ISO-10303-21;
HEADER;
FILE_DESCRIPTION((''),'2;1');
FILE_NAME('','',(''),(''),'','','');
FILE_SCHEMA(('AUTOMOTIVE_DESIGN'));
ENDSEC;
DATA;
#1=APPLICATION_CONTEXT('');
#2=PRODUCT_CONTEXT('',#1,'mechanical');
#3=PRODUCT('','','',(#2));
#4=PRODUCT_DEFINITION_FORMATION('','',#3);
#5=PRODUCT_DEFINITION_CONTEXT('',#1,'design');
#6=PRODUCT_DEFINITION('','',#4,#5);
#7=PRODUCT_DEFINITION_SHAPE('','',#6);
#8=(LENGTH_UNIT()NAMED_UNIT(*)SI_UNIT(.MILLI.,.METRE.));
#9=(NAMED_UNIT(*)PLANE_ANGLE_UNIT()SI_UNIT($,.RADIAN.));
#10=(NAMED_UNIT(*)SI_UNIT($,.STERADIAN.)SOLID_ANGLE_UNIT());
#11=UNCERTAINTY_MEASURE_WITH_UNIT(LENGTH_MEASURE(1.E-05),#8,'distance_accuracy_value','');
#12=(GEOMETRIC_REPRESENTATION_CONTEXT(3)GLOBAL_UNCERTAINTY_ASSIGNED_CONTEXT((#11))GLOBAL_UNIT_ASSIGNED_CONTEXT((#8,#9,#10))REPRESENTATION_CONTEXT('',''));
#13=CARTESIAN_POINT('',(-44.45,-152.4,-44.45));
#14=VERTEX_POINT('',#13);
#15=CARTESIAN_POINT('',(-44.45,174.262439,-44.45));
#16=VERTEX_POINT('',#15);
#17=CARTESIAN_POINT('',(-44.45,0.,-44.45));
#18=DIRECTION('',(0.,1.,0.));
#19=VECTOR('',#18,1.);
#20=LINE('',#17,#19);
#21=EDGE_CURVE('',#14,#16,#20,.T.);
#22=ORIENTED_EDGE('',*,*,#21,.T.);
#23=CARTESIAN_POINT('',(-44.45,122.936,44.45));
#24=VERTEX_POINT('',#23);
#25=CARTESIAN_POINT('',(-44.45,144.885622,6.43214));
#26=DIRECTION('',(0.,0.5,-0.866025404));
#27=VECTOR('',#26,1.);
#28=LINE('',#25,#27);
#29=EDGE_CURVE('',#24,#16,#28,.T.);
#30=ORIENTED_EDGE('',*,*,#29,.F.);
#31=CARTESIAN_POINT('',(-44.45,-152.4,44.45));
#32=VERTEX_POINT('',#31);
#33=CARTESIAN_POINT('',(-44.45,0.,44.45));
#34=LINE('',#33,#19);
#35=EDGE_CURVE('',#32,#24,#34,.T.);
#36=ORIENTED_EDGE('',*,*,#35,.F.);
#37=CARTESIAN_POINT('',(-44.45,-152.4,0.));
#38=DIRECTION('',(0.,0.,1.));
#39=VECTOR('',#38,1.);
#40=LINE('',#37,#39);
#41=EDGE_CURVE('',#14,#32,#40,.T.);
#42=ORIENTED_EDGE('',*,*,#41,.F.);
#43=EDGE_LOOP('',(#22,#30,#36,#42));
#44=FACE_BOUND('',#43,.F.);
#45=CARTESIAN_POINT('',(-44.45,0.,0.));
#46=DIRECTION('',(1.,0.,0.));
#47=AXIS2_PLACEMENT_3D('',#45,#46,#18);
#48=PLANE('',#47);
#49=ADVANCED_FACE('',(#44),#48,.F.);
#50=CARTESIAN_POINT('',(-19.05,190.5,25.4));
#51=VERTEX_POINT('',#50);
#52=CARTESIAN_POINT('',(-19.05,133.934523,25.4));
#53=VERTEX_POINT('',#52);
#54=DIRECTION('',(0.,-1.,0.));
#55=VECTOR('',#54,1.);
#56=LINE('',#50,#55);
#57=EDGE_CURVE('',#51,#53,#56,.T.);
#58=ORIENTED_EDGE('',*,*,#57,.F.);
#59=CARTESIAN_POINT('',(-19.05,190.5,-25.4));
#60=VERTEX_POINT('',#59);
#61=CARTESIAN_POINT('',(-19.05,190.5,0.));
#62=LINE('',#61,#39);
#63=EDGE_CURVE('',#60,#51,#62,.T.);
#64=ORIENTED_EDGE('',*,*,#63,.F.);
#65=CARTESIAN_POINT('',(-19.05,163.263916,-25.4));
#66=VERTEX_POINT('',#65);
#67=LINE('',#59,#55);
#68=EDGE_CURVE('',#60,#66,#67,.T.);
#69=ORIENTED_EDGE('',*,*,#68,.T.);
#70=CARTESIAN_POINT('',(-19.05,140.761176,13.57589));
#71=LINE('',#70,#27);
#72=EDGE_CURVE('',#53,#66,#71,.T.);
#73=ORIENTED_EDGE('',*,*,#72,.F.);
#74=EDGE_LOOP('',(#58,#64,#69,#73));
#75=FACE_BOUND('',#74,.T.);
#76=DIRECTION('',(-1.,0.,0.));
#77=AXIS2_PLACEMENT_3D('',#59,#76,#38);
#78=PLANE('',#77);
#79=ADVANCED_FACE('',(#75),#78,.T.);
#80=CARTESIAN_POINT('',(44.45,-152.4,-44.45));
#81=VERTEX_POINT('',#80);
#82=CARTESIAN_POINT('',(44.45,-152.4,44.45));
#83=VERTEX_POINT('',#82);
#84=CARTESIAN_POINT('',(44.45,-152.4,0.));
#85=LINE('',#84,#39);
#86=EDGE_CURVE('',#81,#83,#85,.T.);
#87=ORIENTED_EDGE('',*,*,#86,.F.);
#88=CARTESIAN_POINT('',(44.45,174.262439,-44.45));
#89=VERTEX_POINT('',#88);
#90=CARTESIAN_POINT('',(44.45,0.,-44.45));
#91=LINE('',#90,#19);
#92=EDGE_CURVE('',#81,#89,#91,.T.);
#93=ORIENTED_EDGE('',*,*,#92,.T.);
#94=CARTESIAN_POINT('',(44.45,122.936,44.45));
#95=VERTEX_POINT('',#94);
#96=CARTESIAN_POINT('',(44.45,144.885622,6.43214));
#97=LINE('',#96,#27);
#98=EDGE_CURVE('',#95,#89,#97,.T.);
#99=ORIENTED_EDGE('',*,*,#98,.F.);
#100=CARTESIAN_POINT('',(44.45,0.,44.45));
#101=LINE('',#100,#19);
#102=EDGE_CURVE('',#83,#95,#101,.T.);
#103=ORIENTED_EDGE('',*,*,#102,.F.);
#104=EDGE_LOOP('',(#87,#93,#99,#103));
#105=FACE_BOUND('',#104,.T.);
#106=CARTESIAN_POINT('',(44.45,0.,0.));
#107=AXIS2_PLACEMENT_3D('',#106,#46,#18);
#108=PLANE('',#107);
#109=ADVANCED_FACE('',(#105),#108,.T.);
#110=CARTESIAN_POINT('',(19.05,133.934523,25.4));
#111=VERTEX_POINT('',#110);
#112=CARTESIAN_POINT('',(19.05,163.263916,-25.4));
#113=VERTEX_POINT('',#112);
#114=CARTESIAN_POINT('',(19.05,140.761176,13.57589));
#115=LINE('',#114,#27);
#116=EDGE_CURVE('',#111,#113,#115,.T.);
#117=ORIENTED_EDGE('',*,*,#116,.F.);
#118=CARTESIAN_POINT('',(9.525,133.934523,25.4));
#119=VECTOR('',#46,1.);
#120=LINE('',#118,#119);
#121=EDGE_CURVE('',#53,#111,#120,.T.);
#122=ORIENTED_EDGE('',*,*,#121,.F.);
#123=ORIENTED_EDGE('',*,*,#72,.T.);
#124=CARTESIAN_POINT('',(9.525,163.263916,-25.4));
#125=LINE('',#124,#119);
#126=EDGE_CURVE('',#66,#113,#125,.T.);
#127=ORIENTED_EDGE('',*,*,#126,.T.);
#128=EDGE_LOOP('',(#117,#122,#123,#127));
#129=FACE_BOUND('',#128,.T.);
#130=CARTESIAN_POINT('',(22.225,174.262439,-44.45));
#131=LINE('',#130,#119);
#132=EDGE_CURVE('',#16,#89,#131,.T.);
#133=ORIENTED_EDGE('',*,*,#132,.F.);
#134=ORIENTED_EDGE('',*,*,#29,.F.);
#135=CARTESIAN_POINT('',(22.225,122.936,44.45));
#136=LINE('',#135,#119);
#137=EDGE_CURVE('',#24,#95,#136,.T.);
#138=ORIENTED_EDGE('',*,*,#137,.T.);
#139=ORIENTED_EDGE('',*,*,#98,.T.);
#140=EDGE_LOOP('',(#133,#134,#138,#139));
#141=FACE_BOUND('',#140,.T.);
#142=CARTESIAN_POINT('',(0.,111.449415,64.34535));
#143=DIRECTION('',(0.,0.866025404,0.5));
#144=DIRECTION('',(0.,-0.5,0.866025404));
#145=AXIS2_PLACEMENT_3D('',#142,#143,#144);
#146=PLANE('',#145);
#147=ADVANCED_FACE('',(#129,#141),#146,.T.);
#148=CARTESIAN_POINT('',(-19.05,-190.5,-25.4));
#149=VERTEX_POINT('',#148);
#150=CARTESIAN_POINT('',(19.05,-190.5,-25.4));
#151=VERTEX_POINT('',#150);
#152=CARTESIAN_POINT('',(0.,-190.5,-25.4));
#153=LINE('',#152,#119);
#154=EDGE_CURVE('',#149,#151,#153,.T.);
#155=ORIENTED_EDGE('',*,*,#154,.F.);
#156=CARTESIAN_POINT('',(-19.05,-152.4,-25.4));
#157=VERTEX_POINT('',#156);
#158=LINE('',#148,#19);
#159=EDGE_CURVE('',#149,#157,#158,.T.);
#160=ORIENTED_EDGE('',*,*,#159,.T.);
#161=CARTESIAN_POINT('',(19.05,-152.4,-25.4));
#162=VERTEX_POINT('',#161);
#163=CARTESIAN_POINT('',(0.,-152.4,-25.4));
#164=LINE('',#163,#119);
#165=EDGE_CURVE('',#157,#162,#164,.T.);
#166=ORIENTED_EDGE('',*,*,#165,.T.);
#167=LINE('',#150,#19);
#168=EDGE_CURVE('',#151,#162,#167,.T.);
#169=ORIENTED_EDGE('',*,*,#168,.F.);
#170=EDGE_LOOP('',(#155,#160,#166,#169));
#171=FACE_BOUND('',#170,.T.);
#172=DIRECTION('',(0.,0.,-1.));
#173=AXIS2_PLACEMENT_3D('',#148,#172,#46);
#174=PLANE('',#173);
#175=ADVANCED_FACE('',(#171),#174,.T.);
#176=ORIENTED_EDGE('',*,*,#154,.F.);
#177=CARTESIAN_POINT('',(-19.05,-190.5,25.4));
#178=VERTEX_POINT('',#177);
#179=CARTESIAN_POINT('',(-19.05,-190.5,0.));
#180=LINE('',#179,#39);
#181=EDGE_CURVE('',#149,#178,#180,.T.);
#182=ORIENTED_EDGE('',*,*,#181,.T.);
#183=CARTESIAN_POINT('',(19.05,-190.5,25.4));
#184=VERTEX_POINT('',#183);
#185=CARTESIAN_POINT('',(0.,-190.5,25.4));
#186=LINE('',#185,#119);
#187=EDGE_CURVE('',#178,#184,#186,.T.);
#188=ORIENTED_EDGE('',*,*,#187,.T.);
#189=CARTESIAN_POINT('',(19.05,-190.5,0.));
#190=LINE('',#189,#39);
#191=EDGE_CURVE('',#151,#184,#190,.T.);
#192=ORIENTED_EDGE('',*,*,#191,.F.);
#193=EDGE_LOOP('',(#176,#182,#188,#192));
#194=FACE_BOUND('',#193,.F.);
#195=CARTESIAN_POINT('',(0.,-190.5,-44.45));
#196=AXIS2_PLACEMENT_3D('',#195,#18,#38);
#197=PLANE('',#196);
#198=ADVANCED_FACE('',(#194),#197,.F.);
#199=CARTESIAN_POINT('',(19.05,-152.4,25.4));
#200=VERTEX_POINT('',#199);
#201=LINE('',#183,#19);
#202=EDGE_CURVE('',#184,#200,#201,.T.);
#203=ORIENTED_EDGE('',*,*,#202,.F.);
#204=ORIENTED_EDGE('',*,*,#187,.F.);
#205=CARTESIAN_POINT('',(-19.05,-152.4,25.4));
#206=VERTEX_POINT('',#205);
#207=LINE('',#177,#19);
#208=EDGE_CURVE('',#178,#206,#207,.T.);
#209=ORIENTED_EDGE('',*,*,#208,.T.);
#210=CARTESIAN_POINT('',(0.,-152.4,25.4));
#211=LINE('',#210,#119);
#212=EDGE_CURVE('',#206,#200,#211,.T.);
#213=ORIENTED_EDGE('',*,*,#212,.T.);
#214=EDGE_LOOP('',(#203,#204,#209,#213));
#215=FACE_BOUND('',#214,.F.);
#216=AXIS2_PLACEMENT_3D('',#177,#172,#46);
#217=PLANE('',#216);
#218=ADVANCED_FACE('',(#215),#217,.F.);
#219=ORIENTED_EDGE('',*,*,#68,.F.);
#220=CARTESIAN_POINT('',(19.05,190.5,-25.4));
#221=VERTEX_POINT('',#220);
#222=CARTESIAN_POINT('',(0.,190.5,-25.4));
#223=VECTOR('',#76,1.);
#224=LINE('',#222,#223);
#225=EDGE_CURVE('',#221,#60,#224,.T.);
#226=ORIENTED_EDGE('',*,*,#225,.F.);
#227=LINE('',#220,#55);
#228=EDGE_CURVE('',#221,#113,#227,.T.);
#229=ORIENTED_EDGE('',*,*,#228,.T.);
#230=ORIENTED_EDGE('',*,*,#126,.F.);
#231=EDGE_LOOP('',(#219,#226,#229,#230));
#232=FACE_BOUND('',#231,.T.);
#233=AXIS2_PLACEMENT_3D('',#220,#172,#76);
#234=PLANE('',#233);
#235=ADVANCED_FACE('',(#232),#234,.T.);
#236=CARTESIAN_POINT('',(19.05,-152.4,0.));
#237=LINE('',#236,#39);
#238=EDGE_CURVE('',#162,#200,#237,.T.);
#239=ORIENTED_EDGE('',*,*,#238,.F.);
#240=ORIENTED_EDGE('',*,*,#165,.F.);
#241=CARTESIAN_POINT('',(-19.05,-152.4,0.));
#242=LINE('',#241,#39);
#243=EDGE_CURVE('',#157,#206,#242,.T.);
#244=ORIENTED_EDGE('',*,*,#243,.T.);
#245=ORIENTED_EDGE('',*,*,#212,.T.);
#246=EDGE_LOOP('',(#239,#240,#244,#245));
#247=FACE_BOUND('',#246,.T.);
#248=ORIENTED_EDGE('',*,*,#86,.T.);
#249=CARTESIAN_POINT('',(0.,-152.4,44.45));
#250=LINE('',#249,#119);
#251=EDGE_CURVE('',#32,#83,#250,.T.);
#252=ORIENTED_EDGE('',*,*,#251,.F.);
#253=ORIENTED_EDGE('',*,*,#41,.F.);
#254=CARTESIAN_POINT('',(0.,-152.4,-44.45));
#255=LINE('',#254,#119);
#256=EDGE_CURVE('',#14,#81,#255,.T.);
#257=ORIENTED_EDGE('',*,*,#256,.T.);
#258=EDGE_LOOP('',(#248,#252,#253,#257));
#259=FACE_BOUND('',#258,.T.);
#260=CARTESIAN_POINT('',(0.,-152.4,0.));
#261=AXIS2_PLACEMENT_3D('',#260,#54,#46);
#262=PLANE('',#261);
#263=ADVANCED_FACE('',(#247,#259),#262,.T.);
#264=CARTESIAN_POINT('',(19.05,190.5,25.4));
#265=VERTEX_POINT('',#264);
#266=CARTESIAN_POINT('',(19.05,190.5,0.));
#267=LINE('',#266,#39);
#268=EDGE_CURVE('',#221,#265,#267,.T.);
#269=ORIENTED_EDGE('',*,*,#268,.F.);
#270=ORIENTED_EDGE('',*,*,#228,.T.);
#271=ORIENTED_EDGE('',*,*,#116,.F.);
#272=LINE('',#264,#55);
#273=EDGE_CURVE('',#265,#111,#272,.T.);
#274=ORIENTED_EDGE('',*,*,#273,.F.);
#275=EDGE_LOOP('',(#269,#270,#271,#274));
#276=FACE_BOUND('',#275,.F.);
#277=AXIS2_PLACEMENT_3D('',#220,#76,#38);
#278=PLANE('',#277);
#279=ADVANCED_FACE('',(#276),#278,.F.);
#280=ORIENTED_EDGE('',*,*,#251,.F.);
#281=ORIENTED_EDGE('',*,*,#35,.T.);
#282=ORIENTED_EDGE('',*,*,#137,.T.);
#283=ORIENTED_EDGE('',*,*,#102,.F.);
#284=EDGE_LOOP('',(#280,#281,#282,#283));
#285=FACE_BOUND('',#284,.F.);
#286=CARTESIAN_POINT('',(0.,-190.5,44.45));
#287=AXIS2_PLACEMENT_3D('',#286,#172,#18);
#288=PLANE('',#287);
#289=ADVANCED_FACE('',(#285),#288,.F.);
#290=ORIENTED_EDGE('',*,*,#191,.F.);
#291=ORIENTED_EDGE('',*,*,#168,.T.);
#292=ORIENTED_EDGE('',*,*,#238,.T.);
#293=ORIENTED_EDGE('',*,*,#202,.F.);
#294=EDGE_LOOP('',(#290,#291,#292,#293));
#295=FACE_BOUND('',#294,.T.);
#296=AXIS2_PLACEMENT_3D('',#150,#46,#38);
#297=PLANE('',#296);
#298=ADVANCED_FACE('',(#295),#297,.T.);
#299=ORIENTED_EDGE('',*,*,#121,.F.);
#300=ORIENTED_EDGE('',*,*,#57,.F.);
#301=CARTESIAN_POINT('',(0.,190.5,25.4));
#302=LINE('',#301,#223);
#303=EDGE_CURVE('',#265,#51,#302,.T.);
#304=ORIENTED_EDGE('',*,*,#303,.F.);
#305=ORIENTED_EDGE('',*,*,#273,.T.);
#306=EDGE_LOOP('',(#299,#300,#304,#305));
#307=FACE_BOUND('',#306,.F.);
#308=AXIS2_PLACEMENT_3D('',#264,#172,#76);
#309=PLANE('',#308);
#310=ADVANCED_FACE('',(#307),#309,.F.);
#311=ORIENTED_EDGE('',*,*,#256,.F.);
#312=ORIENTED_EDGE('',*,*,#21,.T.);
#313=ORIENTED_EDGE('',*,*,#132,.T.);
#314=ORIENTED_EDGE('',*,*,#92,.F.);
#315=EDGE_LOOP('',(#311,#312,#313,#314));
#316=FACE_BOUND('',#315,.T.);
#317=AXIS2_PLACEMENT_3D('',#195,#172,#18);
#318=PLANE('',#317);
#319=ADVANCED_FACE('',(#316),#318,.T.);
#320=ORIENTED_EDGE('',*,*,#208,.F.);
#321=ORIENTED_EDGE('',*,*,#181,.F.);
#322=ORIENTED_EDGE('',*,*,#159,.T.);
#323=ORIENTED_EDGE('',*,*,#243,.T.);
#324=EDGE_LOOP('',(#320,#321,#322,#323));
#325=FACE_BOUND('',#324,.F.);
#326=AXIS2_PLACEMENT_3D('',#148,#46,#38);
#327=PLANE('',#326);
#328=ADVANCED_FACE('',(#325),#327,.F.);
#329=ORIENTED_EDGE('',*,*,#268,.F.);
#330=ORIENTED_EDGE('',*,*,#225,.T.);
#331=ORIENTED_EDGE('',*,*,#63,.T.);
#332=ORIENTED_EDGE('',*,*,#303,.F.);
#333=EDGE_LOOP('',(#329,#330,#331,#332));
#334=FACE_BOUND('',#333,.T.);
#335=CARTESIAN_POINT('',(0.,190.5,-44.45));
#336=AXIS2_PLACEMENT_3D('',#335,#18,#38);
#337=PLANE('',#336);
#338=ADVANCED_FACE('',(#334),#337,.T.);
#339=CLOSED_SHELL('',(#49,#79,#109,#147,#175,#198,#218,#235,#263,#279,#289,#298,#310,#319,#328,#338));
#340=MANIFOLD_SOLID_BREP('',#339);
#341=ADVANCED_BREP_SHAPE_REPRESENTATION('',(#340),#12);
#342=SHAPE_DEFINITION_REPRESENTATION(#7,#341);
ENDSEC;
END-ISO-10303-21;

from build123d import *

# Parameters (mm, degrees)
F0_W     = 381
F0_H     = 88.9
F1_DEPTH = 44.45
F4_W     = 88.9
F4_H     = 88.9
F4_W_2   = 38.1
F4_H_2   = 50.8
F5_REACH = 193.287585695
F6_W     = 88.9
F6_H     = 88.9
F6_W_2   = 38.1
F6_H_2   = 50.8
F7_DEPTH = 38.1


with BuildPart() as f1:
    # F0 (on Right) → F1 (new body, symmetric)
    with BuildSketch(Plane.YZ):
        Rectangle(F0_W, F0_H)
    extrude(amount=F1_DEPTH, both=True)

    f5_end = Plane(origin=(0, 111.4494145991, 64.3453495198), x_dir=(0, -0.5, 0.8660254038), z_dir=(0, 0.8660254038, 0.5))
    # F4 (on face) → F5 (cut, up to a plane its end follows)
    with BuildSketch(Plane(origin=(0, 190.5, 0), x_dir=(-1, 0, 0), z_dir=(0, 1, 0))):
        Rectangle(F4_W, F4_H)
        Rectangle(F4_W_2, F4_H_2, mode=Mode.SUBTRACT)
    f5_long = extrude(amount=-F5_REACH, mode=Mode.PRIVATE)
    add(split(f5_long, bisect_by=f5_end, keep=Keep.TOP, mode=Mode.PRIVATE), mode=Mode.SUBTRACT)

    # F6 (on face) → F7 (cut)
    with BuildSketch(Plane.XZ.offset(190.5)):
        Rectangle(F6_W, F6_H)
        Rectangle(F6_W_2, F6_H_2, mode=Mode.SUBTRACT)
    extrude(amount=-F7_DEPTH, mode=Mode.SUBTRACT)


solid = f1.part
